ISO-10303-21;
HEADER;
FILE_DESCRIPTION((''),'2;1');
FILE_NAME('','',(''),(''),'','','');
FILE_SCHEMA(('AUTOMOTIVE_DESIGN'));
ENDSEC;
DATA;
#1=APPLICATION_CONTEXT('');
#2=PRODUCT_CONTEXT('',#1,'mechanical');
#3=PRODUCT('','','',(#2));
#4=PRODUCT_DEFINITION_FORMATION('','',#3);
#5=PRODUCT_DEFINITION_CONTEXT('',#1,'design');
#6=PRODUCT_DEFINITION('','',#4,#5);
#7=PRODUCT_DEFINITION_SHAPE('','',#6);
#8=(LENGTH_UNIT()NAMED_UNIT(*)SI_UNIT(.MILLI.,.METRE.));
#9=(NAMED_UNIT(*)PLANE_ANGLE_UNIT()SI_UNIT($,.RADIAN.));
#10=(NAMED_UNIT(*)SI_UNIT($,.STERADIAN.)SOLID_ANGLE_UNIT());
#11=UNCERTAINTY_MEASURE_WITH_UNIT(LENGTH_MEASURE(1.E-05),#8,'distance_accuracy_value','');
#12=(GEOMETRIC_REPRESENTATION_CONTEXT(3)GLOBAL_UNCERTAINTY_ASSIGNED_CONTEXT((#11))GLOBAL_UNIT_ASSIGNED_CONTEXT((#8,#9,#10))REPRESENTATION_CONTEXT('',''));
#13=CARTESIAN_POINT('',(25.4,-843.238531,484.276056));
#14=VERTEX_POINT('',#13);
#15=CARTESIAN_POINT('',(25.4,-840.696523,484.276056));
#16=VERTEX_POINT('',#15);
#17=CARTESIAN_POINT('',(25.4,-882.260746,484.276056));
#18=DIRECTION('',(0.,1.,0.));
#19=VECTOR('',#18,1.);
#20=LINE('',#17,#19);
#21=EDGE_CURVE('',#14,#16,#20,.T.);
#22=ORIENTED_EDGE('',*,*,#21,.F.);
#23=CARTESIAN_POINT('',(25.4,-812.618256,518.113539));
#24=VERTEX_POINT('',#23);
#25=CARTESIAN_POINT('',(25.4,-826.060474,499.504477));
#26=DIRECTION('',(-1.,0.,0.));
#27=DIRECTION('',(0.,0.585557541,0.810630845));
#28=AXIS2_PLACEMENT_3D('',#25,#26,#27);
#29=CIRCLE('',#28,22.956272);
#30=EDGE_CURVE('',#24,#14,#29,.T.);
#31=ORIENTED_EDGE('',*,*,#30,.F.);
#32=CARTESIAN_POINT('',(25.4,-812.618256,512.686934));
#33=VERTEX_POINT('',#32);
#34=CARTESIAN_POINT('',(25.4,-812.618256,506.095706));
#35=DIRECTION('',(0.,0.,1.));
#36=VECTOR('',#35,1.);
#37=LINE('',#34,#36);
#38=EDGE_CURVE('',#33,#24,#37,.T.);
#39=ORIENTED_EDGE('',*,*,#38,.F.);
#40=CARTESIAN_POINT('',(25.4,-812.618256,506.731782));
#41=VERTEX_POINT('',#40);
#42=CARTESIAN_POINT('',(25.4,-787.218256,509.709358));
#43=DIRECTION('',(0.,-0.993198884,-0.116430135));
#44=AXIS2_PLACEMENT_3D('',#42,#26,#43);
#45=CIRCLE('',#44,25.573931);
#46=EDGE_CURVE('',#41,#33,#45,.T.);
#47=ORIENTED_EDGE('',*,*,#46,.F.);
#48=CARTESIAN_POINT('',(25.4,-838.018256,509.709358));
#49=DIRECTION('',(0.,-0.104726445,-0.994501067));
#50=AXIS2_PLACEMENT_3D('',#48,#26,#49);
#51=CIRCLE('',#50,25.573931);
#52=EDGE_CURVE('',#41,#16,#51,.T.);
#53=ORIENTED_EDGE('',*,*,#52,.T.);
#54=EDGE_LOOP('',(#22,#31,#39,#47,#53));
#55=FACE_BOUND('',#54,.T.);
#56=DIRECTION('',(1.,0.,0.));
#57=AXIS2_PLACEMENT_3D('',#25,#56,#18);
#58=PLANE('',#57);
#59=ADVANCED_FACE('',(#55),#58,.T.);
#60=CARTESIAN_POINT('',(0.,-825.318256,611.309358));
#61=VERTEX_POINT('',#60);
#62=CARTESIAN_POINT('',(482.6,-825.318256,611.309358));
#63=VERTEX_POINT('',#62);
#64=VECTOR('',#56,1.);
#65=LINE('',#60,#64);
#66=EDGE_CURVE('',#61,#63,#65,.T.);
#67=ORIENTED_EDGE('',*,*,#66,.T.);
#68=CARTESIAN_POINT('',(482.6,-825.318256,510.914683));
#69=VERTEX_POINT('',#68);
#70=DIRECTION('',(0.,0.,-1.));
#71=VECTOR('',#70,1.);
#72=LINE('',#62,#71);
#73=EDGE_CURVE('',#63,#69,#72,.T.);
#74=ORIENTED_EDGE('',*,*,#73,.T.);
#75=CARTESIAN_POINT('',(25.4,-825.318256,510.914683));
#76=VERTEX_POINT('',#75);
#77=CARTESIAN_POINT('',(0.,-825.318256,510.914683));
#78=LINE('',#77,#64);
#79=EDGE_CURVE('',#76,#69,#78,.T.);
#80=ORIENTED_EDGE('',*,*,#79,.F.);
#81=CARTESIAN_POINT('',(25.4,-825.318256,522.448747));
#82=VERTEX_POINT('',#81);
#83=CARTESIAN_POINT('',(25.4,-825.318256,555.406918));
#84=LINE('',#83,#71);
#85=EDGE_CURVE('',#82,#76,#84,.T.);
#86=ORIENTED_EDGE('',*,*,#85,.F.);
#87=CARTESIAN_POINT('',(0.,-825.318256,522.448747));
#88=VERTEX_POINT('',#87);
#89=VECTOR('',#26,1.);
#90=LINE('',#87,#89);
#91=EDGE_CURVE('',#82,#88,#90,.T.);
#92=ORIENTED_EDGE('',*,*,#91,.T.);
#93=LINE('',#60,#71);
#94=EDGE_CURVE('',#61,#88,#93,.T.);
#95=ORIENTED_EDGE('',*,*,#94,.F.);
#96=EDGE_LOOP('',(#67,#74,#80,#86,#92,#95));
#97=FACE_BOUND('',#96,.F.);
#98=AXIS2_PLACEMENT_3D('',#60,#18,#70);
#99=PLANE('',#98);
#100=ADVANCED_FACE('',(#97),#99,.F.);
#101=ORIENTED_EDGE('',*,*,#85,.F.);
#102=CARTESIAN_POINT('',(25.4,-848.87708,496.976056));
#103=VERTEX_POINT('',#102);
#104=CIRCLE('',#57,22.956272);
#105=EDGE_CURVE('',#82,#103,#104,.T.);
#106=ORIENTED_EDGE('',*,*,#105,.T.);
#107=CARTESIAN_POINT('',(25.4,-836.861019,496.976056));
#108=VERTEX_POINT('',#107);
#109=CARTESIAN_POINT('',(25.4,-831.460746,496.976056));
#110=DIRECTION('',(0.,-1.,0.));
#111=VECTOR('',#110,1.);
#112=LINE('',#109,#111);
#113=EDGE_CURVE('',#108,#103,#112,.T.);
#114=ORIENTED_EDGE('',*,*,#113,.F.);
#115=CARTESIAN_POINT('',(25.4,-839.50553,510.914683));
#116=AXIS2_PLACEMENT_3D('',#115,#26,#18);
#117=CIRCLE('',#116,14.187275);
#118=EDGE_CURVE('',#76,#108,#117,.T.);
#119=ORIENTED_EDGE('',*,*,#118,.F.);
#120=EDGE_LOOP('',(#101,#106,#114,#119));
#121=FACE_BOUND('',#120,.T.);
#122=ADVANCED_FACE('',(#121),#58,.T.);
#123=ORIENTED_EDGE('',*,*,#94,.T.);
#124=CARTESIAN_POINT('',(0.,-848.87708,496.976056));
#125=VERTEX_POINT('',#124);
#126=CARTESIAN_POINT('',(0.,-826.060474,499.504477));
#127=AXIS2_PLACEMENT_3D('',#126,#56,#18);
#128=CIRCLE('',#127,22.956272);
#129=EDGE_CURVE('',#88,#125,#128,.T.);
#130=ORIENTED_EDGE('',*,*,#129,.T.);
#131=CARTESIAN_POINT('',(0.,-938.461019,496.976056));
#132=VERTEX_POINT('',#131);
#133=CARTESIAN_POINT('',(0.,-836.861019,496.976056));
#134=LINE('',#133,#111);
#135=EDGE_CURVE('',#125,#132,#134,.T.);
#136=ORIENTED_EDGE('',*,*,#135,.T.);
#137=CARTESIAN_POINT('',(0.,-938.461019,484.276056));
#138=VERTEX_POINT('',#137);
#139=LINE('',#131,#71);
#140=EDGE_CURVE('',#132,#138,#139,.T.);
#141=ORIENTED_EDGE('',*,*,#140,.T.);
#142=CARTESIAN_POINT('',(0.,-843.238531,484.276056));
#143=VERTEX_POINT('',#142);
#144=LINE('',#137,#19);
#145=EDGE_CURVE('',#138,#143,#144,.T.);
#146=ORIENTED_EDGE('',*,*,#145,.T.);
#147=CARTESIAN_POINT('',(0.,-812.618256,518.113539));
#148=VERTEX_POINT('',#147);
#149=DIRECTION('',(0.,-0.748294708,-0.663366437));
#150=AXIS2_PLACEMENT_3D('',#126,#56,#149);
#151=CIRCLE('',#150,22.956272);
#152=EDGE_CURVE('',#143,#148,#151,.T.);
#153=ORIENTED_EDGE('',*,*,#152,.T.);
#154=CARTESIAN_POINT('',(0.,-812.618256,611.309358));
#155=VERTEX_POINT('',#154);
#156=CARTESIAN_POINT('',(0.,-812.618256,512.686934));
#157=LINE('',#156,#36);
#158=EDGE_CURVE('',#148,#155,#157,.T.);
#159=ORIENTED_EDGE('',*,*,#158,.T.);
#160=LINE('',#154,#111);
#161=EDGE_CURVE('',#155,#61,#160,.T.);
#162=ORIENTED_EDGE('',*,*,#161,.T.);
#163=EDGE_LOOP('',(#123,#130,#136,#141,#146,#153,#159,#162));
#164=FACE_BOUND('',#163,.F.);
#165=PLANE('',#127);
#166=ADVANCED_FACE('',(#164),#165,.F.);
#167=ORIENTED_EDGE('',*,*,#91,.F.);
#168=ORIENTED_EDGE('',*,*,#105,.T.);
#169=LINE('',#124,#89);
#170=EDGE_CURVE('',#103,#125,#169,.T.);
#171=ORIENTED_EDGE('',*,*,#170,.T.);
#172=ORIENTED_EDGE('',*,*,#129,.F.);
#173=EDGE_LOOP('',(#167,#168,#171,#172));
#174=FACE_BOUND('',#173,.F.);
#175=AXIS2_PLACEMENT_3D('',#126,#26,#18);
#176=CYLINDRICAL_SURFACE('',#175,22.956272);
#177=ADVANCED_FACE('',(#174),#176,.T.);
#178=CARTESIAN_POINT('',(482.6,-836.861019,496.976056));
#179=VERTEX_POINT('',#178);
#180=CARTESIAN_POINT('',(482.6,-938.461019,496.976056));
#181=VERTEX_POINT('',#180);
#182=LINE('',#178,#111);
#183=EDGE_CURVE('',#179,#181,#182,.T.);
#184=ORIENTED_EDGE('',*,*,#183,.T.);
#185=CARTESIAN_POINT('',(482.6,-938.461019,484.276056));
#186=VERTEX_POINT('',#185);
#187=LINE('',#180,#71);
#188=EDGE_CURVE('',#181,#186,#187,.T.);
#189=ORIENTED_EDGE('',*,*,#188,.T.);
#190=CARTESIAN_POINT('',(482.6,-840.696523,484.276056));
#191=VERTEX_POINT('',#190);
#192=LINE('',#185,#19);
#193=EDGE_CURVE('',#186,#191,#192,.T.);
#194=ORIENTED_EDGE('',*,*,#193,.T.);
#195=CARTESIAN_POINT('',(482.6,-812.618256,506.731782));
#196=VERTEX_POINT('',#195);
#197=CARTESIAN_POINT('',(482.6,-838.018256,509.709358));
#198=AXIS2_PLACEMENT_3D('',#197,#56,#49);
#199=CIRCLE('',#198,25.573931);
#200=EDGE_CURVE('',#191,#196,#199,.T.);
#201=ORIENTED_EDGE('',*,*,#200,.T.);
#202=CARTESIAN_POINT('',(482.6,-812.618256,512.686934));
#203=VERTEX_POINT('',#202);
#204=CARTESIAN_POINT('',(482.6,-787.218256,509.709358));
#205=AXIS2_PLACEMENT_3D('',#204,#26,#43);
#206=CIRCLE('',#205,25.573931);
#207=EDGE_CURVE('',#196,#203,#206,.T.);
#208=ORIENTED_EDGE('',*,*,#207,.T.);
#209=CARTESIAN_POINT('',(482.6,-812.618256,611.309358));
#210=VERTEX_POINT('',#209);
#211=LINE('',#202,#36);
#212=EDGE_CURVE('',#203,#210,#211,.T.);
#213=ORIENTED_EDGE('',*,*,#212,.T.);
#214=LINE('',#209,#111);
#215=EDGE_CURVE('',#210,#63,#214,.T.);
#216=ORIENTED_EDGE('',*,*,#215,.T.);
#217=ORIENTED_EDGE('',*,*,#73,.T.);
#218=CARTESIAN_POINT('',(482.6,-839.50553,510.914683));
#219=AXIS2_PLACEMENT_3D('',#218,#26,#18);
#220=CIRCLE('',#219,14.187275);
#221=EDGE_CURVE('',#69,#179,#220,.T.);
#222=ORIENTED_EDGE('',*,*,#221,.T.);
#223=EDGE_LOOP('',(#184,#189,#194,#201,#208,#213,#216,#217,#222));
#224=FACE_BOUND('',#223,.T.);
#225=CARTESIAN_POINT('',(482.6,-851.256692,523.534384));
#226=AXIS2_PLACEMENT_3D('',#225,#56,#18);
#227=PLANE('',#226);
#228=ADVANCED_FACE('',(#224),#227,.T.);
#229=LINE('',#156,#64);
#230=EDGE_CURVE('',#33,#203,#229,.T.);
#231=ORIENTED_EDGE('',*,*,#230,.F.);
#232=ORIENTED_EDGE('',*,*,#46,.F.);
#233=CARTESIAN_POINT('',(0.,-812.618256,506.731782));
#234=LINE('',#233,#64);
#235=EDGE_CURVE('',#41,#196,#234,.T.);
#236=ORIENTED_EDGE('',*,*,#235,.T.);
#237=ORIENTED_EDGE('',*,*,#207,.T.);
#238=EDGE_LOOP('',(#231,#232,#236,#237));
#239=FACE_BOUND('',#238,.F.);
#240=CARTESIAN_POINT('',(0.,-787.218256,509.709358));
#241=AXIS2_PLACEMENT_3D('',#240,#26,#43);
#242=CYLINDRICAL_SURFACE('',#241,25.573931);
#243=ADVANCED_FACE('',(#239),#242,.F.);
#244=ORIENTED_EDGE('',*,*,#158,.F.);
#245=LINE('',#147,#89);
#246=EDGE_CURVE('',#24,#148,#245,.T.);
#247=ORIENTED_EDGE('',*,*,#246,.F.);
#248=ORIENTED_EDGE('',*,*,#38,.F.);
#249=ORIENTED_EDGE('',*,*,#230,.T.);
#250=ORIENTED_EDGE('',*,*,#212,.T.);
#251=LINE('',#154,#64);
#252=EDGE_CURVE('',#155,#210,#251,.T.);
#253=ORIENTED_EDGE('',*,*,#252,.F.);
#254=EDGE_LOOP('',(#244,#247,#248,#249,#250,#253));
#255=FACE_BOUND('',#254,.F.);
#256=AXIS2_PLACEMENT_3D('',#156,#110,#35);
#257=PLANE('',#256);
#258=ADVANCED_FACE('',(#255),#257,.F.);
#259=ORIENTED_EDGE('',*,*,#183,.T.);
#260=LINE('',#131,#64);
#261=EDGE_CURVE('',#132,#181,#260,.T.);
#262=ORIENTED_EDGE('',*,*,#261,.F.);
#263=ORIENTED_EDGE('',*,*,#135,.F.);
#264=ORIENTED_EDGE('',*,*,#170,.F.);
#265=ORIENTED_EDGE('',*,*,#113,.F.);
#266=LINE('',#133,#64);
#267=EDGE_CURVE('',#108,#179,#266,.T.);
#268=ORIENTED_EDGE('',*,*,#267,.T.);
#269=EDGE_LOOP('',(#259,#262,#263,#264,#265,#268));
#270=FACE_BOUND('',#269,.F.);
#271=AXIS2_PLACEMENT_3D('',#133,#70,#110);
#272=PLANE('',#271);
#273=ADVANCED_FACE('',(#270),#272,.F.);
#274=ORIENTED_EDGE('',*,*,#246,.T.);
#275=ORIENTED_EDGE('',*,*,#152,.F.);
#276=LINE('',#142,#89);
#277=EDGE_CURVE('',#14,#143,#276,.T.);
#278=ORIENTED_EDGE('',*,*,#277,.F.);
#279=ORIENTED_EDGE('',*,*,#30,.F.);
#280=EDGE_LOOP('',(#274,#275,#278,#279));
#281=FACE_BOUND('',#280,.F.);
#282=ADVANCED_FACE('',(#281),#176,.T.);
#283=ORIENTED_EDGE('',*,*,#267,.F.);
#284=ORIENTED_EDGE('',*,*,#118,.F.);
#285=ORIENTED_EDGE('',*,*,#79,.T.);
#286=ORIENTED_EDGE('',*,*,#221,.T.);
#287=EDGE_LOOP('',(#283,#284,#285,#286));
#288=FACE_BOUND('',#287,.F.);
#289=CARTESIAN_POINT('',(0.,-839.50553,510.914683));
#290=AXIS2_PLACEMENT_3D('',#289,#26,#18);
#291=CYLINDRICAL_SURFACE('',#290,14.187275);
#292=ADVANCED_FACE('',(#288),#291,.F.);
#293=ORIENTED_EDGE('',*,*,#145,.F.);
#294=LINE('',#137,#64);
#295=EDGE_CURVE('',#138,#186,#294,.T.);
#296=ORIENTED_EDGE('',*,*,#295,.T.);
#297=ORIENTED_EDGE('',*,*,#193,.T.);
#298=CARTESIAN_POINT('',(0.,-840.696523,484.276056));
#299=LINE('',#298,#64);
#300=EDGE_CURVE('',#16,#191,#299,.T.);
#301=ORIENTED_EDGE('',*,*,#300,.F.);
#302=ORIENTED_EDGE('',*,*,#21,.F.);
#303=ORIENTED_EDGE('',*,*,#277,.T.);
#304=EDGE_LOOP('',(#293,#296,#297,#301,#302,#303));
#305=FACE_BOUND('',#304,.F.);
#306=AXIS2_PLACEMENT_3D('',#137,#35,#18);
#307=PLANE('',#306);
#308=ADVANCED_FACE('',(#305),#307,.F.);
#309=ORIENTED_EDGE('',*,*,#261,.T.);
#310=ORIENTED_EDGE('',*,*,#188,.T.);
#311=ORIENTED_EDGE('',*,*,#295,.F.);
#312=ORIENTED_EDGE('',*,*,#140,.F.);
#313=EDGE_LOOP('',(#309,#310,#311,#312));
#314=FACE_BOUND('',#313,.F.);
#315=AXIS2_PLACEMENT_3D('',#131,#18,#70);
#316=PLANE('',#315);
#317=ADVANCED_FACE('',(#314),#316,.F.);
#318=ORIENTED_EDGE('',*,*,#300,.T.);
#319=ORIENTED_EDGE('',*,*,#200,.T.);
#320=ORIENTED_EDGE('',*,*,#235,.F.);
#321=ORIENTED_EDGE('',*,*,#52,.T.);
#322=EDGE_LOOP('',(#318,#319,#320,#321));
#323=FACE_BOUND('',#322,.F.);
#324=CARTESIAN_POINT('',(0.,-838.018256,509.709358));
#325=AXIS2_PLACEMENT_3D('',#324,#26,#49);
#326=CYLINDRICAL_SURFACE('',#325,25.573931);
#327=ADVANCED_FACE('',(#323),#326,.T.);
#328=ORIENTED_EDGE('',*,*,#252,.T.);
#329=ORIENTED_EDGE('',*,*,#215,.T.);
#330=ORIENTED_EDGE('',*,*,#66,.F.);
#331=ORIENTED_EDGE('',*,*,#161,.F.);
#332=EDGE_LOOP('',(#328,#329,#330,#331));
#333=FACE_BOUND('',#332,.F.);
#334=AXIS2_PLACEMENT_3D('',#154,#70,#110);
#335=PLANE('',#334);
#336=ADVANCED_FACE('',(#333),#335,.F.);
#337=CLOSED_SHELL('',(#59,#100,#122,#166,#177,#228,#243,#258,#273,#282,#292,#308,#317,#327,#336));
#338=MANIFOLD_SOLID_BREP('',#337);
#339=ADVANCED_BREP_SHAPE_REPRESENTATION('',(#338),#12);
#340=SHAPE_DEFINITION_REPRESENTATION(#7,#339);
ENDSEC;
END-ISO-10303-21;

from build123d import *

# Parameters (mm, degrees)
F1_DEPTH = 482.6
F2_R     = 22.9562722026
F3_DEPTH = 25.4


# Not quite as in the source:
# - a feature names something its author has since deleted; it is built from what else it names


with BuildPart() as f1:
    # F0 (on Right) → F1 (new body)
    with BuildSketch(Plane.YZ):
        with BuildLine():
            Line((-812.6182556152, 512.6869344869), (-812.6182556152, 611.3093582153))
            Line((-812.6182556152, 611.3093582153), (-825.3182556152, 611.3093582153))
            Line((-825.3182556152, 611.3093582153), (-825.3182556152, 510.914683342))
            ThreePointArc((-825.3182556152, 510.914683342), (-828.5785642638, 501.8659167533), (-836.8610188459, 496.9760562897))
            Line((-836.8610188459, 496.9760562897), (-938.4610188459, 496.9760562897))
            Line((-938.4610188459, 496.9760562897), (-938.4610188459, 484.2760562897))
            Line((-938.4610188459, 484.2760562897), (-840.6965225196, 484.2760562897))
            ThreePointArc((-840.6965225196, 484.2760562897), (-822.0453350188, 489.7370832304), (-812.6182556152, 506.7317819438))
            ThreePointArc((-812.6182556152, 506.7317819438), (-812.7921868823, 509.7093582153), (-812.6182556152, 512.6869344869))
        make_face()
    extrude(amount=F1_DEPTH)

    # F2 (on Right) → F3 (join)
    with BuildSketch(Plane.YZ):
        with Locations((-826.0604739189, 499.5044767857)):
            Circle(F2_R)
    extrude(amount=F3_DEPTH)


solid = f1.part
